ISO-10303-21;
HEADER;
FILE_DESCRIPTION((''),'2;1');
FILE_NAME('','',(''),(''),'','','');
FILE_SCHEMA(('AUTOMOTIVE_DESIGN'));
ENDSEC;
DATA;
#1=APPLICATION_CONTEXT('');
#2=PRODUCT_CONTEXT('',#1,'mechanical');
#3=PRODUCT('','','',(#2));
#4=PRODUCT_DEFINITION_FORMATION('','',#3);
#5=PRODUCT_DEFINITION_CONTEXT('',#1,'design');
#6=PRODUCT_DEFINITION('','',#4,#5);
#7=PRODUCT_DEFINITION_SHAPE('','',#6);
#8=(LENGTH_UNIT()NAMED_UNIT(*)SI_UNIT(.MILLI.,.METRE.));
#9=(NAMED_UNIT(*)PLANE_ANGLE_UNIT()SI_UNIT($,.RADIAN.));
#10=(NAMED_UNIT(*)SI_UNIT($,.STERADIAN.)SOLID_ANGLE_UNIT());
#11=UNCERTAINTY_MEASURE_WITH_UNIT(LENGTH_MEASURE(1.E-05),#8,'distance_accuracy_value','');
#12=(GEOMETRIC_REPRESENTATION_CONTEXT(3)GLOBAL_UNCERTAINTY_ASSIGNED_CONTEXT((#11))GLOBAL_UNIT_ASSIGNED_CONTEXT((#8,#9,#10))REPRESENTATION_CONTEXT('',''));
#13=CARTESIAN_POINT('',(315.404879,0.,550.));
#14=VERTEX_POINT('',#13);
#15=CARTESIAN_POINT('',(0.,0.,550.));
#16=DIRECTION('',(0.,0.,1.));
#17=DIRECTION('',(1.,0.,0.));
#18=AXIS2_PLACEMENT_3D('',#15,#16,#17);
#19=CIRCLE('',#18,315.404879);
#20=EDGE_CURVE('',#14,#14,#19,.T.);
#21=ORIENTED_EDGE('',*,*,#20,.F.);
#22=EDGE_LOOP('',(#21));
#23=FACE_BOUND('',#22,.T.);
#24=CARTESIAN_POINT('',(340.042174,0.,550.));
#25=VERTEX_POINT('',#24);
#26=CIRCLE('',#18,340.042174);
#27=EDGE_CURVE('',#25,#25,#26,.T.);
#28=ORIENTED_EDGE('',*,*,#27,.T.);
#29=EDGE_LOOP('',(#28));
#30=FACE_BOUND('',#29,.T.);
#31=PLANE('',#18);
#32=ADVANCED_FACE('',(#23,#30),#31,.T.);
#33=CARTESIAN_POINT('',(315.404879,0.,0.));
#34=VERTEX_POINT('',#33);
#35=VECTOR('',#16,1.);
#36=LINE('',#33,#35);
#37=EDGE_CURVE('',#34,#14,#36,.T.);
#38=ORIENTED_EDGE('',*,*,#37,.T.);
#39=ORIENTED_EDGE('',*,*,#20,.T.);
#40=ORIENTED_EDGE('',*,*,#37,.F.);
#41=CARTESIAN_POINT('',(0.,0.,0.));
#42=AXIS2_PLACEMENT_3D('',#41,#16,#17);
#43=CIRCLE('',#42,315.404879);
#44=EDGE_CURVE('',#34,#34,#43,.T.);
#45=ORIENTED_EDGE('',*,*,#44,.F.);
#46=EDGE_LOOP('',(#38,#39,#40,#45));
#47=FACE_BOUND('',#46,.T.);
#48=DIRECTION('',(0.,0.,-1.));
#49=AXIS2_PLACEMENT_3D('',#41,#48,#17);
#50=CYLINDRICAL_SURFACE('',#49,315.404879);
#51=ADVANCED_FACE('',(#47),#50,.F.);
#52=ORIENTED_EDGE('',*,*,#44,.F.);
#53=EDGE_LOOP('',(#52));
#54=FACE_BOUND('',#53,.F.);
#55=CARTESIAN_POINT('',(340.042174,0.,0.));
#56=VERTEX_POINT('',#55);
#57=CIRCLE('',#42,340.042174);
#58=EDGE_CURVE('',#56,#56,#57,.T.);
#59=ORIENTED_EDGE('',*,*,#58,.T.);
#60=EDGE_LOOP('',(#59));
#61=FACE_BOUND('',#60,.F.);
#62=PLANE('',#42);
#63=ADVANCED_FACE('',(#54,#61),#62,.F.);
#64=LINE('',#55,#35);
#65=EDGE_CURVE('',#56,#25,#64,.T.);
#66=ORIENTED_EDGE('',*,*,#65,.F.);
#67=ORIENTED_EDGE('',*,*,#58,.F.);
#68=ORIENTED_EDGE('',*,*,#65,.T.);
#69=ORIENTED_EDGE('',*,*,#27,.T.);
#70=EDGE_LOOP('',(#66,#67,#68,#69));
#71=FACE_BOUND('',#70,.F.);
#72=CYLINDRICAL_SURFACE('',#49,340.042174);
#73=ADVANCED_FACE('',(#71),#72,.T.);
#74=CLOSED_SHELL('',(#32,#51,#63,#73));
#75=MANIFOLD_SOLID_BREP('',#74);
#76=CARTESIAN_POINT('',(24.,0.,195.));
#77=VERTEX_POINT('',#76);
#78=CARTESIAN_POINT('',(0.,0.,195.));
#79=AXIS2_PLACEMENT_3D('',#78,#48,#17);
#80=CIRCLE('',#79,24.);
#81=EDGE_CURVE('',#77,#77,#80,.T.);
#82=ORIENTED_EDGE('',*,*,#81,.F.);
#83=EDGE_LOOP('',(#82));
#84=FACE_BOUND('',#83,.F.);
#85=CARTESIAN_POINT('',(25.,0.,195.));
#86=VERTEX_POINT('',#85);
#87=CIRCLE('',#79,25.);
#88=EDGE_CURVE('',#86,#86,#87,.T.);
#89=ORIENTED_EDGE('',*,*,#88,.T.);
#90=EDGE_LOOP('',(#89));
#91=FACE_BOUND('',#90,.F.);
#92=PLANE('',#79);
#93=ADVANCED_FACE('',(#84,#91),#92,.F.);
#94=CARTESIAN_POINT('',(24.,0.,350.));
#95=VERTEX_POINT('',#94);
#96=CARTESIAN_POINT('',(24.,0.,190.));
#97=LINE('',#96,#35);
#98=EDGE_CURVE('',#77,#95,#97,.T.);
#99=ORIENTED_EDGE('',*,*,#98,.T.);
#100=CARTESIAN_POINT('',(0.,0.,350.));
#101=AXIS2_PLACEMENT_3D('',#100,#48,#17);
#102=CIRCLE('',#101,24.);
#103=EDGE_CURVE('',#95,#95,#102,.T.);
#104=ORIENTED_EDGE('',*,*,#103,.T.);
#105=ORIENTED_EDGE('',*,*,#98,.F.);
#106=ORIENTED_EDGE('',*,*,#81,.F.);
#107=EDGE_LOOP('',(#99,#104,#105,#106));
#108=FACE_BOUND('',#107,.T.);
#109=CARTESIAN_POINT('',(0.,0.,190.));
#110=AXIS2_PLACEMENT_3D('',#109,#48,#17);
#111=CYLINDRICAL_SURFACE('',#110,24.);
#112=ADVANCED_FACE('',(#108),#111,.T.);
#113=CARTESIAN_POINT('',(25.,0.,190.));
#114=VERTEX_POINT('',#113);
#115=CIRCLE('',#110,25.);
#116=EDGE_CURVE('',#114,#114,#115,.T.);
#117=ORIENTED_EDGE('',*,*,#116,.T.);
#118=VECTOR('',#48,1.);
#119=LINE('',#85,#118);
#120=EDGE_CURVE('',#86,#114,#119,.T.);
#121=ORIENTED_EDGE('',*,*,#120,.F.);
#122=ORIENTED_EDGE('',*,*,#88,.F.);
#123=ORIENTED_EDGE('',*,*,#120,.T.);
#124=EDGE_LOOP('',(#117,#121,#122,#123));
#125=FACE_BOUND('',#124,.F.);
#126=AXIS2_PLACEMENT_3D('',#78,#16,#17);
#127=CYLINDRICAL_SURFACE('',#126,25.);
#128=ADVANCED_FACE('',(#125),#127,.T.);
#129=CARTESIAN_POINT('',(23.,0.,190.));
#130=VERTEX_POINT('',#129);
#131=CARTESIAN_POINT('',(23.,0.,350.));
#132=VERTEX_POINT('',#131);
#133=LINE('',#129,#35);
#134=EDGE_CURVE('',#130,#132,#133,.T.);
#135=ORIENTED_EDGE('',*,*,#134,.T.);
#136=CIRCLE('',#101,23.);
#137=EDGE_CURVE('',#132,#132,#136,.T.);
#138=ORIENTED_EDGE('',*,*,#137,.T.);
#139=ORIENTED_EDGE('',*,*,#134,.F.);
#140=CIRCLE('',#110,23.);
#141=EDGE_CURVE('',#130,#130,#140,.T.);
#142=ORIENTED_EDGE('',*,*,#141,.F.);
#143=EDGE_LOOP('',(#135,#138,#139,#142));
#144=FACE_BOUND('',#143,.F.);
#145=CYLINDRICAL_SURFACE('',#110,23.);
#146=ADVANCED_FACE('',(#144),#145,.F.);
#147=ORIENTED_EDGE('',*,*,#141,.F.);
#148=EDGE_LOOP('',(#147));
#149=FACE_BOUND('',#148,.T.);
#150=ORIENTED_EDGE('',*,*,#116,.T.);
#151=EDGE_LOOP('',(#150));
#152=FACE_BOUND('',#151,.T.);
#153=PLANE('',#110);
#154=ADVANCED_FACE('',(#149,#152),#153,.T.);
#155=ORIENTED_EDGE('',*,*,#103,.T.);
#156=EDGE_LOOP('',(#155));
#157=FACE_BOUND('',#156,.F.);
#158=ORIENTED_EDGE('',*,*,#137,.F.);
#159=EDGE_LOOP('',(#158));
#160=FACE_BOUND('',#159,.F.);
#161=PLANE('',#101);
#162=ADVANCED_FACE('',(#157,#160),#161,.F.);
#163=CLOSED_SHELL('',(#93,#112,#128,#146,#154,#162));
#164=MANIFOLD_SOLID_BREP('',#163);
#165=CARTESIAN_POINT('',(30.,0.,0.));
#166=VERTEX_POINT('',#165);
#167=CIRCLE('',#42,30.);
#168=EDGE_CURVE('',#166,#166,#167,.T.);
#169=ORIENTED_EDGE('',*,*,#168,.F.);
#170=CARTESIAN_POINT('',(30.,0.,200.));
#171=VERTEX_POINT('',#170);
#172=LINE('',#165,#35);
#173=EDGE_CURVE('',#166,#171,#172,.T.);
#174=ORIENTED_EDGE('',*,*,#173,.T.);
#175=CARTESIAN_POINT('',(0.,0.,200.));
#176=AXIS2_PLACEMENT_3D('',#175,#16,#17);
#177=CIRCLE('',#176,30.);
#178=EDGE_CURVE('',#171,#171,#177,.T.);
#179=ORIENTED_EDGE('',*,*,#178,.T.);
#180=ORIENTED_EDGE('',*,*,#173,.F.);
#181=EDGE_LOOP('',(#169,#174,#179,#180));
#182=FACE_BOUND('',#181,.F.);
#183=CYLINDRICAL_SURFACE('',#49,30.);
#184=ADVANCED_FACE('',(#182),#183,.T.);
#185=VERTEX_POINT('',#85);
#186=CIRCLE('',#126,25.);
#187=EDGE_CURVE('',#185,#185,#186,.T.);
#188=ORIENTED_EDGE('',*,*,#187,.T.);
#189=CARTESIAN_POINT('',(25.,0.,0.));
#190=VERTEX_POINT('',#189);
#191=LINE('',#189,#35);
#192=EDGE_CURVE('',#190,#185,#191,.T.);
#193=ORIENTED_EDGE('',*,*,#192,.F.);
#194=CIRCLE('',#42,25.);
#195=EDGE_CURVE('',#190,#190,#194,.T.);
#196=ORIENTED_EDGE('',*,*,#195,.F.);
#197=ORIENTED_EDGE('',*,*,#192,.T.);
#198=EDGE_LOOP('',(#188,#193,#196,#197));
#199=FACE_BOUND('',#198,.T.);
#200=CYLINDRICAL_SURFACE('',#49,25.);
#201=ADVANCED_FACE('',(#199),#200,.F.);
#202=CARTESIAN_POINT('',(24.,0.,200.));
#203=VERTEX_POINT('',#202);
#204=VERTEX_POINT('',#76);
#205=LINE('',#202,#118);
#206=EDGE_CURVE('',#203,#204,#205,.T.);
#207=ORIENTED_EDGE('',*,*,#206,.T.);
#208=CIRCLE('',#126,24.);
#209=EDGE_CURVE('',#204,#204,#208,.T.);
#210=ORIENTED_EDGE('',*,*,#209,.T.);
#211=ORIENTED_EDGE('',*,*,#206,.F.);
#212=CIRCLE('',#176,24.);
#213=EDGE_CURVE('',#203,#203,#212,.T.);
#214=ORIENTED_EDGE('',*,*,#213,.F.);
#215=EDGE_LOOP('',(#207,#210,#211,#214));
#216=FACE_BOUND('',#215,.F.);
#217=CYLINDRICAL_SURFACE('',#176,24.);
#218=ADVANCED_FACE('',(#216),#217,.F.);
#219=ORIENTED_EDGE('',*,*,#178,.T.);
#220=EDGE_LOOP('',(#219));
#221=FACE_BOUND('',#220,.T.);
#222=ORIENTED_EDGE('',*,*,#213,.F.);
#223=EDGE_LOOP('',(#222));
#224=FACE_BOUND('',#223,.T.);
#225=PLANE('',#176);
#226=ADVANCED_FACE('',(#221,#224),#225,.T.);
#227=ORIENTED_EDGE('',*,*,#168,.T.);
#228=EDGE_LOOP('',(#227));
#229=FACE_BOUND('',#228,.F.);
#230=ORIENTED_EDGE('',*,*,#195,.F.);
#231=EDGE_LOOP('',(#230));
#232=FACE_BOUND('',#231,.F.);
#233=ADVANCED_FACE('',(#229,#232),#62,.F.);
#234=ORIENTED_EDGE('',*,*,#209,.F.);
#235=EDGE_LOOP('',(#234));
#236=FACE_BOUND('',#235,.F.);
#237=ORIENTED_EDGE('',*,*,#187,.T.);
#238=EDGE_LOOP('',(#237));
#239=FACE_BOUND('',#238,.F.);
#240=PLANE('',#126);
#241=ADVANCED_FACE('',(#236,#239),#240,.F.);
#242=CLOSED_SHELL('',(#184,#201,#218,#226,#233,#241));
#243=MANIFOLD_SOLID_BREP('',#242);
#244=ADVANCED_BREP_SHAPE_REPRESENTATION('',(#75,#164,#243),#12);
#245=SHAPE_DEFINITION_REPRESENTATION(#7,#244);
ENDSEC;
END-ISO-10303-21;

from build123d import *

# Parameters (mm, degrees)
F0_R     = 30
F0_R_2   = 25
F1_DEPTH = 200
F3_R     = 340.0421742973
F3_R_2   = 315.4048789829
F4_DEPTH = 550
F2_R     = 25
F2_R_2   = 24
F5_DEPTH = 5
F6_R     = 25
F6_R_2   = 24
F7_DEPTH = 5
F8_R     = 24
F8_R_2   = 23
F9_DEPTH = 160


with BuildPart() as f1:
    # F0 (on Top) → F1 (new body)
    with BuildSketch(Plane.XY):
        Circle(F0_R)
        Circle(F0_R_2, mode=Mode.SUBTRACT)
    extrude(amount=F1_DEPTH)

    # F2 (on face) → F5 (join)
    with BuildSketch(Plane.XY.offset(200)):
        Circle(F2_R)
        Circle(F2_R_2, mode=Mode.SUBTRACT)
    extrude(amount=-F5_DEPTH)


with BuildPart() as f4:
    # F3 (on Top) → F4 (new body)
    with BuildSketch(Plane.XY):
        Circle(F3_R)
        Circle(F3_R_2, mode=Mode.SUBTRACT)
    extrude(amount=F4_DEPTH)


with BuildPart() as f7:
    # F6 (on face) → F7 (new body)
    with BuildSketch(Plane(origin=(0, 0, 195), x_dir=(1, 0, 0), z_dir=(0, 0, -1))):
        Circle(F6_R)
        Circle(F6_R_2, mode=Mode.SUBTRACT)
    extrude(amount=F7_DEPTH)

    # F8 (on face) → F9 (join)
    with BuildSketch(Plane(origin=(0, 0, 190), x_dir=(1, 0, 0), z_dir=(0, 0, -1))):
        Circle(F8_R)
        Circle(F8_R_2, mode=Mode.SUBTRACT)
    extrude(amount=-F9_DEPTH)


solid = Compound([f1.part, f4.part, f7.part])
